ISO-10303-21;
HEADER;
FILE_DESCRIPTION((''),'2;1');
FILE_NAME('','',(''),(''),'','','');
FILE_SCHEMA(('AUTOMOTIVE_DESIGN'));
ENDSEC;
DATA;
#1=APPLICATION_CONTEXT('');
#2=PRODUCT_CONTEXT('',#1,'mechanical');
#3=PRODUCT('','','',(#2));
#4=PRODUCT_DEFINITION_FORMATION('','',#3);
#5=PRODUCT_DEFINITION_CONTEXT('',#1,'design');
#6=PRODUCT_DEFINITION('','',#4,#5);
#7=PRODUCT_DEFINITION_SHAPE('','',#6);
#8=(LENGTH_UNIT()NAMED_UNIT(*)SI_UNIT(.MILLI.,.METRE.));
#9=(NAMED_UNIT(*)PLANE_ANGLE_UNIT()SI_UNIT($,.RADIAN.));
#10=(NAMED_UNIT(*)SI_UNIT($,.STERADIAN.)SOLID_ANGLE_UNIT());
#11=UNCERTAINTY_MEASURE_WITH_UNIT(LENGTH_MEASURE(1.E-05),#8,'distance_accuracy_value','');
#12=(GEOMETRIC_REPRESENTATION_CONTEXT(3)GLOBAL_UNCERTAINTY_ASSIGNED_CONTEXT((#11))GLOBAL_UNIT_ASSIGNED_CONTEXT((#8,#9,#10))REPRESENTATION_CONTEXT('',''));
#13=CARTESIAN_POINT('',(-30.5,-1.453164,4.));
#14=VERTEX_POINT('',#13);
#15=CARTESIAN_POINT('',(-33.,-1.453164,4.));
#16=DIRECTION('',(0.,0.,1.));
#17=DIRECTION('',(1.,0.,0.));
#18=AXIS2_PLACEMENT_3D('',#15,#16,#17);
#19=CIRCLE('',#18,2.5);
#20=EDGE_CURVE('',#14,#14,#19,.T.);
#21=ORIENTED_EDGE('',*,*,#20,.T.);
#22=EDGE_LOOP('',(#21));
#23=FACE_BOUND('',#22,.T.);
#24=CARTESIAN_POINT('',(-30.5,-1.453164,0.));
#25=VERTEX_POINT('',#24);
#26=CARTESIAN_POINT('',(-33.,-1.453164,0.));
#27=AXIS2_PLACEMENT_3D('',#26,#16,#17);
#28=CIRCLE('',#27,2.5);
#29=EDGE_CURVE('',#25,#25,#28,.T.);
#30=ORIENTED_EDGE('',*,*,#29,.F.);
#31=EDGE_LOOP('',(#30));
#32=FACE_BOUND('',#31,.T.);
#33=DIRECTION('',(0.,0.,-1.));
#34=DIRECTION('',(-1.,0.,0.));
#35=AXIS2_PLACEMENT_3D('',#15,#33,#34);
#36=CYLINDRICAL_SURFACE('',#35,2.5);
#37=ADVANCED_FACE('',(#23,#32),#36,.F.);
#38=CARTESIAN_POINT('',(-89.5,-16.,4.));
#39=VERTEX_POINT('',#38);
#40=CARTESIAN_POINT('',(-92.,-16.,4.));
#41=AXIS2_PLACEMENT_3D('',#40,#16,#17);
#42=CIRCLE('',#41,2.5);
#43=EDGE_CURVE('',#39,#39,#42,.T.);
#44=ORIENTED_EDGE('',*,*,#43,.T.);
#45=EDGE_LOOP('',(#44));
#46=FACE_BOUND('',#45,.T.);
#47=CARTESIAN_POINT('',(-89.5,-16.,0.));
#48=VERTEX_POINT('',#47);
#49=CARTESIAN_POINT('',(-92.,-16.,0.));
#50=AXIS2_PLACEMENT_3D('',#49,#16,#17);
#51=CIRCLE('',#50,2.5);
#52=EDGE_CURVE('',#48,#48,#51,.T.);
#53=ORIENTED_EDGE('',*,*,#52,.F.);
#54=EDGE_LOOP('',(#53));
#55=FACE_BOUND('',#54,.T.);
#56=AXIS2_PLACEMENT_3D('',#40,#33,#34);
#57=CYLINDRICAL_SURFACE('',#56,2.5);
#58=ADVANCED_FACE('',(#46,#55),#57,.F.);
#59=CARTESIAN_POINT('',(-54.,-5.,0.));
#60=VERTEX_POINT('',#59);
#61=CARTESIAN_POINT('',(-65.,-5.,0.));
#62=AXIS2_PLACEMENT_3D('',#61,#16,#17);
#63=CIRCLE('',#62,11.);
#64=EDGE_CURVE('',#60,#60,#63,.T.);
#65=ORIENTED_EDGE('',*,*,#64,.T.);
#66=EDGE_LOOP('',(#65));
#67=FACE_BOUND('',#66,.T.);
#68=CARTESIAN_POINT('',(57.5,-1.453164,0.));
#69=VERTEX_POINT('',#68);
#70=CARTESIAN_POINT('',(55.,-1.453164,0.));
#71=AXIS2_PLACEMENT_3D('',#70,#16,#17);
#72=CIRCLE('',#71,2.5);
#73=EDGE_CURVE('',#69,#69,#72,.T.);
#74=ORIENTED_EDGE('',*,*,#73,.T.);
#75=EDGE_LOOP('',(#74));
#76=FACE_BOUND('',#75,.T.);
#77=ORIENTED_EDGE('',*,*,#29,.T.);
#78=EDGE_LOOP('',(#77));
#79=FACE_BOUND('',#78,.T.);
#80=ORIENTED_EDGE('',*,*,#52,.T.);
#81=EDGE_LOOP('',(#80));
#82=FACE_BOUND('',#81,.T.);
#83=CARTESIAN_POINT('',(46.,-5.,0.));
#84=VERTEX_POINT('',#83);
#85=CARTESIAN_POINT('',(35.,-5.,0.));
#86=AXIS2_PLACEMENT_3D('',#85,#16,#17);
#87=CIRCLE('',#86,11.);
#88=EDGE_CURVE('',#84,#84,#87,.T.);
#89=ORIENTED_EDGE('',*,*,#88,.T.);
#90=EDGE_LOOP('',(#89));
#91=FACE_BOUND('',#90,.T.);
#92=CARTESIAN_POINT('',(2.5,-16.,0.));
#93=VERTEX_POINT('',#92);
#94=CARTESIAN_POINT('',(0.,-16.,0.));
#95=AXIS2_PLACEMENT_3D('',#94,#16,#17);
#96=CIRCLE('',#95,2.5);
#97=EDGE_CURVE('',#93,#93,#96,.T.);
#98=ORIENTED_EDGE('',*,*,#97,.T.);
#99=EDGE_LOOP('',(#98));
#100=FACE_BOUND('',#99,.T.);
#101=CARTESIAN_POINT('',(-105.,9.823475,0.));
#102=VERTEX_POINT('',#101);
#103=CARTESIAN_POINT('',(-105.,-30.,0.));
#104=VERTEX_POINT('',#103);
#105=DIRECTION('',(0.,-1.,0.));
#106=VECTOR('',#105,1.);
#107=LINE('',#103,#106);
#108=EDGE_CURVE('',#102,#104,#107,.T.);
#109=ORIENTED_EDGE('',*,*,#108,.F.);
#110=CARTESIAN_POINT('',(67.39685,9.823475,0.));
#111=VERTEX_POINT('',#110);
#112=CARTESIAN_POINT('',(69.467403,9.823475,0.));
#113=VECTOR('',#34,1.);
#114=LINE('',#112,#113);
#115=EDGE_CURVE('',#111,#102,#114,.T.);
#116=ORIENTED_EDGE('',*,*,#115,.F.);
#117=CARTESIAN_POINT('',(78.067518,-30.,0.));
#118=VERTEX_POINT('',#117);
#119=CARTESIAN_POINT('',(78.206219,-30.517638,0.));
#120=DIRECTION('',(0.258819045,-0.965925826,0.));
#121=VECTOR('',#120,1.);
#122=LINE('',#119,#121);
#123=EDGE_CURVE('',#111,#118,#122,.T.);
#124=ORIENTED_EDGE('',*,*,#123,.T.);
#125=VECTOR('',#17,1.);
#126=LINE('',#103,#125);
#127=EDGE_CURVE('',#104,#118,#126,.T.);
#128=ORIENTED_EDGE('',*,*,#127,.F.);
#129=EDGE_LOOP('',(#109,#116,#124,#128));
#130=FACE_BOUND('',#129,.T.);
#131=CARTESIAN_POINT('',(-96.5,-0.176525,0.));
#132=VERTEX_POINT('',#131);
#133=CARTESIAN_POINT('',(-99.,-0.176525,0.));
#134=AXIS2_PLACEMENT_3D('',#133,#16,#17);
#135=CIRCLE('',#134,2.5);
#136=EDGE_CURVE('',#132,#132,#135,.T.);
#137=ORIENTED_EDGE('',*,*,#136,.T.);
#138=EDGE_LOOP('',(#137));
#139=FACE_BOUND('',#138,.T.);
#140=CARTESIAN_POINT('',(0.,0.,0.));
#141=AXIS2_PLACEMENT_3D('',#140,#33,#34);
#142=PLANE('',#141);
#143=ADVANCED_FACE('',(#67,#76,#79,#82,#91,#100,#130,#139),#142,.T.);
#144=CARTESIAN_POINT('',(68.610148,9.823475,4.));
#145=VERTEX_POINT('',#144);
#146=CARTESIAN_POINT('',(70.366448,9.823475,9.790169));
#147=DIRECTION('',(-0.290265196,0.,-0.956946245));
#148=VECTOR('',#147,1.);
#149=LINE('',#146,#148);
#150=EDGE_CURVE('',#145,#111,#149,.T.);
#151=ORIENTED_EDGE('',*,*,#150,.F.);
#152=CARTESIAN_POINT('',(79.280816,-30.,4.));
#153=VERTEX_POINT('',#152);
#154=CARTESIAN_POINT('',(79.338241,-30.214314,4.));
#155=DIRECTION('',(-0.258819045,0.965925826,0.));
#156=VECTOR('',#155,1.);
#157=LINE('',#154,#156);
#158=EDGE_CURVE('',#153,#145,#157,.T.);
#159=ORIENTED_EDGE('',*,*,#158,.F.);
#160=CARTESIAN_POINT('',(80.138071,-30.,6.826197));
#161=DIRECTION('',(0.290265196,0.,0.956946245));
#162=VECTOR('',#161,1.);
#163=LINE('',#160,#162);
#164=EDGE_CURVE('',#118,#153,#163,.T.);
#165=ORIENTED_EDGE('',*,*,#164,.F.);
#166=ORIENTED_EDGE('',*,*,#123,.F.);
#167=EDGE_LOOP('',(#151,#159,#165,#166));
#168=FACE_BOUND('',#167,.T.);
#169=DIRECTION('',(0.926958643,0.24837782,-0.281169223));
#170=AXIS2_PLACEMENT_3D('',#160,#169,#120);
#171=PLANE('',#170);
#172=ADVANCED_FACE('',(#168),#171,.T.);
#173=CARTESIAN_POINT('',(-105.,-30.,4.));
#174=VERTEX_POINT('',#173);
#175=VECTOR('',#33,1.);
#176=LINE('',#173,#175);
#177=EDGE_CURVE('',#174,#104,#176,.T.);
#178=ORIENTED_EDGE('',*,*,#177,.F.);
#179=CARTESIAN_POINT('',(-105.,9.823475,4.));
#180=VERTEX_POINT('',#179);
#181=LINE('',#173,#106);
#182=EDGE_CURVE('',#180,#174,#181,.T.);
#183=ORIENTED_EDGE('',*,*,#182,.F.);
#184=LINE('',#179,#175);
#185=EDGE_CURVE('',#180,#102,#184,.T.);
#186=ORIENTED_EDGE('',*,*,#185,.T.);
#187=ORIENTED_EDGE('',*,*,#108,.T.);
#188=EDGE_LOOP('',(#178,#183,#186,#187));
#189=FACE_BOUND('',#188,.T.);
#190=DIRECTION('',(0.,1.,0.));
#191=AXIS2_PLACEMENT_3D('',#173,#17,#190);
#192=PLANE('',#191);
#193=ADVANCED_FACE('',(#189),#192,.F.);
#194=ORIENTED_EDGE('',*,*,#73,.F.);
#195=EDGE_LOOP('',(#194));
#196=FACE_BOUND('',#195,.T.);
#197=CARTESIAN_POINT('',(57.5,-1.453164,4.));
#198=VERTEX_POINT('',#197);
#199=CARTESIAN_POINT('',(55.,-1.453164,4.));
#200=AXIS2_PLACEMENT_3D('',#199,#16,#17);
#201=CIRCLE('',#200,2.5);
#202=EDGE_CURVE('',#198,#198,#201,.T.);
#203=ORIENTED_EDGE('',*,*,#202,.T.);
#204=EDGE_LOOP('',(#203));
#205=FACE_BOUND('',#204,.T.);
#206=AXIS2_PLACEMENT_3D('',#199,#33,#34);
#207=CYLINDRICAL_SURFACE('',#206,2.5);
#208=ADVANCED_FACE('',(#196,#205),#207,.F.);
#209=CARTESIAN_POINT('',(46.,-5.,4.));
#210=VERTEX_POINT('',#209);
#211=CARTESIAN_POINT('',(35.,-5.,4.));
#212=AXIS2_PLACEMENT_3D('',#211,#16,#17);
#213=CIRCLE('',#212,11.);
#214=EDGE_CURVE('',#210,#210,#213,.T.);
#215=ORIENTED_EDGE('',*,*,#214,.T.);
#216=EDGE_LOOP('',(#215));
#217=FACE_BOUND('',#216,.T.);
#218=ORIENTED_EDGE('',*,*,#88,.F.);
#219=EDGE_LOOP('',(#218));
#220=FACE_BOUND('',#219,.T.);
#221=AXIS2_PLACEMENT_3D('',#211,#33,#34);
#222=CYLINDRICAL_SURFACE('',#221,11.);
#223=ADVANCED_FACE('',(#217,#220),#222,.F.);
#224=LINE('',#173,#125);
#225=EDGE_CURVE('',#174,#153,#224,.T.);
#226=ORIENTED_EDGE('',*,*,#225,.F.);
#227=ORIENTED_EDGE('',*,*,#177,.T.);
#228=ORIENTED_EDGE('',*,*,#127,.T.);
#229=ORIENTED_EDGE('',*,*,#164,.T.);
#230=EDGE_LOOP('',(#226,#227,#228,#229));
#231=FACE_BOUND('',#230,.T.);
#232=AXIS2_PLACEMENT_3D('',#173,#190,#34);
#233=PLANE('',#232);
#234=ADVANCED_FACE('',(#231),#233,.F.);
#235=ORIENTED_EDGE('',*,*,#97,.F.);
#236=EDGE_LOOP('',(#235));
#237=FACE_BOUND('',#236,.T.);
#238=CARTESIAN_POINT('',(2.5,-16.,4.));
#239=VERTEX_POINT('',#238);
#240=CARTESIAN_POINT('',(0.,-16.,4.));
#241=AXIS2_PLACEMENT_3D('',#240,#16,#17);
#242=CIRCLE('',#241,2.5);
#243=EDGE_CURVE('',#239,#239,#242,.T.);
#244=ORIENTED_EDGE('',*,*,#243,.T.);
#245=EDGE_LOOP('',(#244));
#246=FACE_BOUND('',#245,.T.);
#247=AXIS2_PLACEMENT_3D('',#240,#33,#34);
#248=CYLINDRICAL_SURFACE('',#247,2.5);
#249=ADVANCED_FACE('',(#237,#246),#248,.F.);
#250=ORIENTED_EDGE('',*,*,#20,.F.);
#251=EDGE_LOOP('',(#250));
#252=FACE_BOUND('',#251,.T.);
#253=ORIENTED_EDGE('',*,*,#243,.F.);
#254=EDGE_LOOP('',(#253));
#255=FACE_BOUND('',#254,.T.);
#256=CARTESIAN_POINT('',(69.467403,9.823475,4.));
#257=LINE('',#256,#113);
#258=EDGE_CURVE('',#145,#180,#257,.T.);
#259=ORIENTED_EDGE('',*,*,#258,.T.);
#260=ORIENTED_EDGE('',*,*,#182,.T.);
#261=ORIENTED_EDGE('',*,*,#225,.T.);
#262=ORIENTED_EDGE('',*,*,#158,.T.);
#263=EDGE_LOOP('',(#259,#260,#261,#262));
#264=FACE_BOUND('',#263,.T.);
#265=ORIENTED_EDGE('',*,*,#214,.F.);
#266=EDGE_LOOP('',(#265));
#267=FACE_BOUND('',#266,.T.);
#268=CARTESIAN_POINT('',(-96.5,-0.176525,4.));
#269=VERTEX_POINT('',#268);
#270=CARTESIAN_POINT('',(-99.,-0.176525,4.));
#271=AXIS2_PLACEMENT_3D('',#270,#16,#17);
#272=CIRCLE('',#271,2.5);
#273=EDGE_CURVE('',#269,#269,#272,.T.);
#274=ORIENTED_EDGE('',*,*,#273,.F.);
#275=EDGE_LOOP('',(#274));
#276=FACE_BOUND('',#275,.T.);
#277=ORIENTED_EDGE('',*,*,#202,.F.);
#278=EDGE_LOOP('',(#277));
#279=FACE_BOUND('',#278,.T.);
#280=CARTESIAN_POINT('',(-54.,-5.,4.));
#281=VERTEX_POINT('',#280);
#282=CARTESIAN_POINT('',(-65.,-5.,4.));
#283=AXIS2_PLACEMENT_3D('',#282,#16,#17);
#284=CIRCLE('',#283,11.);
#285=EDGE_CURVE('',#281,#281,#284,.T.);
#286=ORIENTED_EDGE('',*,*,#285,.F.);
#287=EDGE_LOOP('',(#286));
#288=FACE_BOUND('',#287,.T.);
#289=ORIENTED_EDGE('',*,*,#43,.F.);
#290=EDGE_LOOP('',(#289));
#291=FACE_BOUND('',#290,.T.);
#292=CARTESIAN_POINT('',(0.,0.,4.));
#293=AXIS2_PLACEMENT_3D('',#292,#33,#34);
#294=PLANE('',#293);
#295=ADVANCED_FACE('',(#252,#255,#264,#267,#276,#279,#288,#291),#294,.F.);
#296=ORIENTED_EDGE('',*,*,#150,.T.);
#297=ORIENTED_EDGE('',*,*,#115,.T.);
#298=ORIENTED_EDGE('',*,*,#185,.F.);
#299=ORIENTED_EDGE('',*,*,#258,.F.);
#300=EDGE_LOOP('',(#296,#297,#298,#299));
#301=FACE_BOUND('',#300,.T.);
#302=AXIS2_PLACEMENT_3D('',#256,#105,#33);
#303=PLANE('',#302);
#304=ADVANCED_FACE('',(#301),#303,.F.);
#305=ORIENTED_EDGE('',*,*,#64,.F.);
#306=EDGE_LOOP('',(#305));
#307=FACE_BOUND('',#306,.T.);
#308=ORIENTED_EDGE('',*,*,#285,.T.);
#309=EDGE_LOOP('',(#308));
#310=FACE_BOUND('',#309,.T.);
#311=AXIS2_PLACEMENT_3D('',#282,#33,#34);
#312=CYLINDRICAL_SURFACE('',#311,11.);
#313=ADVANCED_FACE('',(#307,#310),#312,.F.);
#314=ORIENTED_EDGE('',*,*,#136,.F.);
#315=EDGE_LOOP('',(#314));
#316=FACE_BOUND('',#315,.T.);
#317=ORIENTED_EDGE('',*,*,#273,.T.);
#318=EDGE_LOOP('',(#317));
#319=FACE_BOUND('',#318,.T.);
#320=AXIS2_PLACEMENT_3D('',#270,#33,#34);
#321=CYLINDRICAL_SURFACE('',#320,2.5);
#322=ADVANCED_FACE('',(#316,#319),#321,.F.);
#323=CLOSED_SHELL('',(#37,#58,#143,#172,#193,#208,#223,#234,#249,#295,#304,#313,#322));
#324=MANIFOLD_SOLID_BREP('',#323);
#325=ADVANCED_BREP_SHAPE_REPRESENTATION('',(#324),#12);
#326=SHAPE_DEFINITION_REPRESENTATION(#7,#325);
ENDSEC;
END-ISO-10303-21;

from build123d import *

# Parameters (mm, degrees)
SKETCH2_R           = 11
SKETCH2_R_2         = 2.5
BOSS_EXTRUDE1_DEPTH = 4
CHAMFER1_SIZE       = 6.82619664
CHAMFER1_SIZE_2     = 2


with BuildPart() as part:
    # Sketch2 → Boss-Extrude1 (new body)
    with BuildSketch(Plane.XY):
        Polygon((80.138070711, -30), (69.467402807, 9.823474767), (-105, 9.823474767), (-105, -30), align=None)
        with Locations((35, -5)):
            Circle(SKETCH2_R, mode=Mode.SUBTRACT)
        with Locations((-65, -5)):
            Circle(SKETCH2_R, mode=Mode.SUBTRACT)
        with Locations((-92, -16)):
            Circle(SKETCH2_R_2, mode=Mode.SUBTRACT)
        with Locations((0, -16)):
            Circle(SKETCH2_R_2, mode=Mode.SUBTRACT)
        with Locations((-99, -0.176525233)):
            Circle(SKETCH2_R_2, mode=Mode.SUBTRACT)
        with Locations((-33, -1.453163789)):
            Circle(SKETCH2_R_2, mode=Mode.SUBTRACT)
        with Locations((55, -1.453163789)):
            Circle(SKETCH2_R_2, mode=Mode.SUBTRACT)
    extrude(amount=BOSS_EXTRUDE1_DEPTH)

    # Chamfer1
    # the kernel refuses this chamfer: 6.82619664, 2 mm, written as the material it takes off along each edge
    with BuildSketch(Plane(origin=(84.724761545, -47.117763232, 0), x_dir=(0.010461335179728238, 0.0028031063131594876, 0.9999413498107049), z_dir=(-0.25881904510252185, 0.965925826289068, 0))) as chamfer1_piece_1:
        Polygon((CHAMFER1_SIZE * 0.999941349797, -CHAMFER1_SIZE * 0.0108303711267), (-CHAMFER1_SIZE_2 * 0.0108303711269, -CHAMFER1_SIZE_2 * 0.999941349811), (0, 0), align=None)
    extrude(amount=76.67151992, mode=Mode.SUBTRACT)


solid = part.part
